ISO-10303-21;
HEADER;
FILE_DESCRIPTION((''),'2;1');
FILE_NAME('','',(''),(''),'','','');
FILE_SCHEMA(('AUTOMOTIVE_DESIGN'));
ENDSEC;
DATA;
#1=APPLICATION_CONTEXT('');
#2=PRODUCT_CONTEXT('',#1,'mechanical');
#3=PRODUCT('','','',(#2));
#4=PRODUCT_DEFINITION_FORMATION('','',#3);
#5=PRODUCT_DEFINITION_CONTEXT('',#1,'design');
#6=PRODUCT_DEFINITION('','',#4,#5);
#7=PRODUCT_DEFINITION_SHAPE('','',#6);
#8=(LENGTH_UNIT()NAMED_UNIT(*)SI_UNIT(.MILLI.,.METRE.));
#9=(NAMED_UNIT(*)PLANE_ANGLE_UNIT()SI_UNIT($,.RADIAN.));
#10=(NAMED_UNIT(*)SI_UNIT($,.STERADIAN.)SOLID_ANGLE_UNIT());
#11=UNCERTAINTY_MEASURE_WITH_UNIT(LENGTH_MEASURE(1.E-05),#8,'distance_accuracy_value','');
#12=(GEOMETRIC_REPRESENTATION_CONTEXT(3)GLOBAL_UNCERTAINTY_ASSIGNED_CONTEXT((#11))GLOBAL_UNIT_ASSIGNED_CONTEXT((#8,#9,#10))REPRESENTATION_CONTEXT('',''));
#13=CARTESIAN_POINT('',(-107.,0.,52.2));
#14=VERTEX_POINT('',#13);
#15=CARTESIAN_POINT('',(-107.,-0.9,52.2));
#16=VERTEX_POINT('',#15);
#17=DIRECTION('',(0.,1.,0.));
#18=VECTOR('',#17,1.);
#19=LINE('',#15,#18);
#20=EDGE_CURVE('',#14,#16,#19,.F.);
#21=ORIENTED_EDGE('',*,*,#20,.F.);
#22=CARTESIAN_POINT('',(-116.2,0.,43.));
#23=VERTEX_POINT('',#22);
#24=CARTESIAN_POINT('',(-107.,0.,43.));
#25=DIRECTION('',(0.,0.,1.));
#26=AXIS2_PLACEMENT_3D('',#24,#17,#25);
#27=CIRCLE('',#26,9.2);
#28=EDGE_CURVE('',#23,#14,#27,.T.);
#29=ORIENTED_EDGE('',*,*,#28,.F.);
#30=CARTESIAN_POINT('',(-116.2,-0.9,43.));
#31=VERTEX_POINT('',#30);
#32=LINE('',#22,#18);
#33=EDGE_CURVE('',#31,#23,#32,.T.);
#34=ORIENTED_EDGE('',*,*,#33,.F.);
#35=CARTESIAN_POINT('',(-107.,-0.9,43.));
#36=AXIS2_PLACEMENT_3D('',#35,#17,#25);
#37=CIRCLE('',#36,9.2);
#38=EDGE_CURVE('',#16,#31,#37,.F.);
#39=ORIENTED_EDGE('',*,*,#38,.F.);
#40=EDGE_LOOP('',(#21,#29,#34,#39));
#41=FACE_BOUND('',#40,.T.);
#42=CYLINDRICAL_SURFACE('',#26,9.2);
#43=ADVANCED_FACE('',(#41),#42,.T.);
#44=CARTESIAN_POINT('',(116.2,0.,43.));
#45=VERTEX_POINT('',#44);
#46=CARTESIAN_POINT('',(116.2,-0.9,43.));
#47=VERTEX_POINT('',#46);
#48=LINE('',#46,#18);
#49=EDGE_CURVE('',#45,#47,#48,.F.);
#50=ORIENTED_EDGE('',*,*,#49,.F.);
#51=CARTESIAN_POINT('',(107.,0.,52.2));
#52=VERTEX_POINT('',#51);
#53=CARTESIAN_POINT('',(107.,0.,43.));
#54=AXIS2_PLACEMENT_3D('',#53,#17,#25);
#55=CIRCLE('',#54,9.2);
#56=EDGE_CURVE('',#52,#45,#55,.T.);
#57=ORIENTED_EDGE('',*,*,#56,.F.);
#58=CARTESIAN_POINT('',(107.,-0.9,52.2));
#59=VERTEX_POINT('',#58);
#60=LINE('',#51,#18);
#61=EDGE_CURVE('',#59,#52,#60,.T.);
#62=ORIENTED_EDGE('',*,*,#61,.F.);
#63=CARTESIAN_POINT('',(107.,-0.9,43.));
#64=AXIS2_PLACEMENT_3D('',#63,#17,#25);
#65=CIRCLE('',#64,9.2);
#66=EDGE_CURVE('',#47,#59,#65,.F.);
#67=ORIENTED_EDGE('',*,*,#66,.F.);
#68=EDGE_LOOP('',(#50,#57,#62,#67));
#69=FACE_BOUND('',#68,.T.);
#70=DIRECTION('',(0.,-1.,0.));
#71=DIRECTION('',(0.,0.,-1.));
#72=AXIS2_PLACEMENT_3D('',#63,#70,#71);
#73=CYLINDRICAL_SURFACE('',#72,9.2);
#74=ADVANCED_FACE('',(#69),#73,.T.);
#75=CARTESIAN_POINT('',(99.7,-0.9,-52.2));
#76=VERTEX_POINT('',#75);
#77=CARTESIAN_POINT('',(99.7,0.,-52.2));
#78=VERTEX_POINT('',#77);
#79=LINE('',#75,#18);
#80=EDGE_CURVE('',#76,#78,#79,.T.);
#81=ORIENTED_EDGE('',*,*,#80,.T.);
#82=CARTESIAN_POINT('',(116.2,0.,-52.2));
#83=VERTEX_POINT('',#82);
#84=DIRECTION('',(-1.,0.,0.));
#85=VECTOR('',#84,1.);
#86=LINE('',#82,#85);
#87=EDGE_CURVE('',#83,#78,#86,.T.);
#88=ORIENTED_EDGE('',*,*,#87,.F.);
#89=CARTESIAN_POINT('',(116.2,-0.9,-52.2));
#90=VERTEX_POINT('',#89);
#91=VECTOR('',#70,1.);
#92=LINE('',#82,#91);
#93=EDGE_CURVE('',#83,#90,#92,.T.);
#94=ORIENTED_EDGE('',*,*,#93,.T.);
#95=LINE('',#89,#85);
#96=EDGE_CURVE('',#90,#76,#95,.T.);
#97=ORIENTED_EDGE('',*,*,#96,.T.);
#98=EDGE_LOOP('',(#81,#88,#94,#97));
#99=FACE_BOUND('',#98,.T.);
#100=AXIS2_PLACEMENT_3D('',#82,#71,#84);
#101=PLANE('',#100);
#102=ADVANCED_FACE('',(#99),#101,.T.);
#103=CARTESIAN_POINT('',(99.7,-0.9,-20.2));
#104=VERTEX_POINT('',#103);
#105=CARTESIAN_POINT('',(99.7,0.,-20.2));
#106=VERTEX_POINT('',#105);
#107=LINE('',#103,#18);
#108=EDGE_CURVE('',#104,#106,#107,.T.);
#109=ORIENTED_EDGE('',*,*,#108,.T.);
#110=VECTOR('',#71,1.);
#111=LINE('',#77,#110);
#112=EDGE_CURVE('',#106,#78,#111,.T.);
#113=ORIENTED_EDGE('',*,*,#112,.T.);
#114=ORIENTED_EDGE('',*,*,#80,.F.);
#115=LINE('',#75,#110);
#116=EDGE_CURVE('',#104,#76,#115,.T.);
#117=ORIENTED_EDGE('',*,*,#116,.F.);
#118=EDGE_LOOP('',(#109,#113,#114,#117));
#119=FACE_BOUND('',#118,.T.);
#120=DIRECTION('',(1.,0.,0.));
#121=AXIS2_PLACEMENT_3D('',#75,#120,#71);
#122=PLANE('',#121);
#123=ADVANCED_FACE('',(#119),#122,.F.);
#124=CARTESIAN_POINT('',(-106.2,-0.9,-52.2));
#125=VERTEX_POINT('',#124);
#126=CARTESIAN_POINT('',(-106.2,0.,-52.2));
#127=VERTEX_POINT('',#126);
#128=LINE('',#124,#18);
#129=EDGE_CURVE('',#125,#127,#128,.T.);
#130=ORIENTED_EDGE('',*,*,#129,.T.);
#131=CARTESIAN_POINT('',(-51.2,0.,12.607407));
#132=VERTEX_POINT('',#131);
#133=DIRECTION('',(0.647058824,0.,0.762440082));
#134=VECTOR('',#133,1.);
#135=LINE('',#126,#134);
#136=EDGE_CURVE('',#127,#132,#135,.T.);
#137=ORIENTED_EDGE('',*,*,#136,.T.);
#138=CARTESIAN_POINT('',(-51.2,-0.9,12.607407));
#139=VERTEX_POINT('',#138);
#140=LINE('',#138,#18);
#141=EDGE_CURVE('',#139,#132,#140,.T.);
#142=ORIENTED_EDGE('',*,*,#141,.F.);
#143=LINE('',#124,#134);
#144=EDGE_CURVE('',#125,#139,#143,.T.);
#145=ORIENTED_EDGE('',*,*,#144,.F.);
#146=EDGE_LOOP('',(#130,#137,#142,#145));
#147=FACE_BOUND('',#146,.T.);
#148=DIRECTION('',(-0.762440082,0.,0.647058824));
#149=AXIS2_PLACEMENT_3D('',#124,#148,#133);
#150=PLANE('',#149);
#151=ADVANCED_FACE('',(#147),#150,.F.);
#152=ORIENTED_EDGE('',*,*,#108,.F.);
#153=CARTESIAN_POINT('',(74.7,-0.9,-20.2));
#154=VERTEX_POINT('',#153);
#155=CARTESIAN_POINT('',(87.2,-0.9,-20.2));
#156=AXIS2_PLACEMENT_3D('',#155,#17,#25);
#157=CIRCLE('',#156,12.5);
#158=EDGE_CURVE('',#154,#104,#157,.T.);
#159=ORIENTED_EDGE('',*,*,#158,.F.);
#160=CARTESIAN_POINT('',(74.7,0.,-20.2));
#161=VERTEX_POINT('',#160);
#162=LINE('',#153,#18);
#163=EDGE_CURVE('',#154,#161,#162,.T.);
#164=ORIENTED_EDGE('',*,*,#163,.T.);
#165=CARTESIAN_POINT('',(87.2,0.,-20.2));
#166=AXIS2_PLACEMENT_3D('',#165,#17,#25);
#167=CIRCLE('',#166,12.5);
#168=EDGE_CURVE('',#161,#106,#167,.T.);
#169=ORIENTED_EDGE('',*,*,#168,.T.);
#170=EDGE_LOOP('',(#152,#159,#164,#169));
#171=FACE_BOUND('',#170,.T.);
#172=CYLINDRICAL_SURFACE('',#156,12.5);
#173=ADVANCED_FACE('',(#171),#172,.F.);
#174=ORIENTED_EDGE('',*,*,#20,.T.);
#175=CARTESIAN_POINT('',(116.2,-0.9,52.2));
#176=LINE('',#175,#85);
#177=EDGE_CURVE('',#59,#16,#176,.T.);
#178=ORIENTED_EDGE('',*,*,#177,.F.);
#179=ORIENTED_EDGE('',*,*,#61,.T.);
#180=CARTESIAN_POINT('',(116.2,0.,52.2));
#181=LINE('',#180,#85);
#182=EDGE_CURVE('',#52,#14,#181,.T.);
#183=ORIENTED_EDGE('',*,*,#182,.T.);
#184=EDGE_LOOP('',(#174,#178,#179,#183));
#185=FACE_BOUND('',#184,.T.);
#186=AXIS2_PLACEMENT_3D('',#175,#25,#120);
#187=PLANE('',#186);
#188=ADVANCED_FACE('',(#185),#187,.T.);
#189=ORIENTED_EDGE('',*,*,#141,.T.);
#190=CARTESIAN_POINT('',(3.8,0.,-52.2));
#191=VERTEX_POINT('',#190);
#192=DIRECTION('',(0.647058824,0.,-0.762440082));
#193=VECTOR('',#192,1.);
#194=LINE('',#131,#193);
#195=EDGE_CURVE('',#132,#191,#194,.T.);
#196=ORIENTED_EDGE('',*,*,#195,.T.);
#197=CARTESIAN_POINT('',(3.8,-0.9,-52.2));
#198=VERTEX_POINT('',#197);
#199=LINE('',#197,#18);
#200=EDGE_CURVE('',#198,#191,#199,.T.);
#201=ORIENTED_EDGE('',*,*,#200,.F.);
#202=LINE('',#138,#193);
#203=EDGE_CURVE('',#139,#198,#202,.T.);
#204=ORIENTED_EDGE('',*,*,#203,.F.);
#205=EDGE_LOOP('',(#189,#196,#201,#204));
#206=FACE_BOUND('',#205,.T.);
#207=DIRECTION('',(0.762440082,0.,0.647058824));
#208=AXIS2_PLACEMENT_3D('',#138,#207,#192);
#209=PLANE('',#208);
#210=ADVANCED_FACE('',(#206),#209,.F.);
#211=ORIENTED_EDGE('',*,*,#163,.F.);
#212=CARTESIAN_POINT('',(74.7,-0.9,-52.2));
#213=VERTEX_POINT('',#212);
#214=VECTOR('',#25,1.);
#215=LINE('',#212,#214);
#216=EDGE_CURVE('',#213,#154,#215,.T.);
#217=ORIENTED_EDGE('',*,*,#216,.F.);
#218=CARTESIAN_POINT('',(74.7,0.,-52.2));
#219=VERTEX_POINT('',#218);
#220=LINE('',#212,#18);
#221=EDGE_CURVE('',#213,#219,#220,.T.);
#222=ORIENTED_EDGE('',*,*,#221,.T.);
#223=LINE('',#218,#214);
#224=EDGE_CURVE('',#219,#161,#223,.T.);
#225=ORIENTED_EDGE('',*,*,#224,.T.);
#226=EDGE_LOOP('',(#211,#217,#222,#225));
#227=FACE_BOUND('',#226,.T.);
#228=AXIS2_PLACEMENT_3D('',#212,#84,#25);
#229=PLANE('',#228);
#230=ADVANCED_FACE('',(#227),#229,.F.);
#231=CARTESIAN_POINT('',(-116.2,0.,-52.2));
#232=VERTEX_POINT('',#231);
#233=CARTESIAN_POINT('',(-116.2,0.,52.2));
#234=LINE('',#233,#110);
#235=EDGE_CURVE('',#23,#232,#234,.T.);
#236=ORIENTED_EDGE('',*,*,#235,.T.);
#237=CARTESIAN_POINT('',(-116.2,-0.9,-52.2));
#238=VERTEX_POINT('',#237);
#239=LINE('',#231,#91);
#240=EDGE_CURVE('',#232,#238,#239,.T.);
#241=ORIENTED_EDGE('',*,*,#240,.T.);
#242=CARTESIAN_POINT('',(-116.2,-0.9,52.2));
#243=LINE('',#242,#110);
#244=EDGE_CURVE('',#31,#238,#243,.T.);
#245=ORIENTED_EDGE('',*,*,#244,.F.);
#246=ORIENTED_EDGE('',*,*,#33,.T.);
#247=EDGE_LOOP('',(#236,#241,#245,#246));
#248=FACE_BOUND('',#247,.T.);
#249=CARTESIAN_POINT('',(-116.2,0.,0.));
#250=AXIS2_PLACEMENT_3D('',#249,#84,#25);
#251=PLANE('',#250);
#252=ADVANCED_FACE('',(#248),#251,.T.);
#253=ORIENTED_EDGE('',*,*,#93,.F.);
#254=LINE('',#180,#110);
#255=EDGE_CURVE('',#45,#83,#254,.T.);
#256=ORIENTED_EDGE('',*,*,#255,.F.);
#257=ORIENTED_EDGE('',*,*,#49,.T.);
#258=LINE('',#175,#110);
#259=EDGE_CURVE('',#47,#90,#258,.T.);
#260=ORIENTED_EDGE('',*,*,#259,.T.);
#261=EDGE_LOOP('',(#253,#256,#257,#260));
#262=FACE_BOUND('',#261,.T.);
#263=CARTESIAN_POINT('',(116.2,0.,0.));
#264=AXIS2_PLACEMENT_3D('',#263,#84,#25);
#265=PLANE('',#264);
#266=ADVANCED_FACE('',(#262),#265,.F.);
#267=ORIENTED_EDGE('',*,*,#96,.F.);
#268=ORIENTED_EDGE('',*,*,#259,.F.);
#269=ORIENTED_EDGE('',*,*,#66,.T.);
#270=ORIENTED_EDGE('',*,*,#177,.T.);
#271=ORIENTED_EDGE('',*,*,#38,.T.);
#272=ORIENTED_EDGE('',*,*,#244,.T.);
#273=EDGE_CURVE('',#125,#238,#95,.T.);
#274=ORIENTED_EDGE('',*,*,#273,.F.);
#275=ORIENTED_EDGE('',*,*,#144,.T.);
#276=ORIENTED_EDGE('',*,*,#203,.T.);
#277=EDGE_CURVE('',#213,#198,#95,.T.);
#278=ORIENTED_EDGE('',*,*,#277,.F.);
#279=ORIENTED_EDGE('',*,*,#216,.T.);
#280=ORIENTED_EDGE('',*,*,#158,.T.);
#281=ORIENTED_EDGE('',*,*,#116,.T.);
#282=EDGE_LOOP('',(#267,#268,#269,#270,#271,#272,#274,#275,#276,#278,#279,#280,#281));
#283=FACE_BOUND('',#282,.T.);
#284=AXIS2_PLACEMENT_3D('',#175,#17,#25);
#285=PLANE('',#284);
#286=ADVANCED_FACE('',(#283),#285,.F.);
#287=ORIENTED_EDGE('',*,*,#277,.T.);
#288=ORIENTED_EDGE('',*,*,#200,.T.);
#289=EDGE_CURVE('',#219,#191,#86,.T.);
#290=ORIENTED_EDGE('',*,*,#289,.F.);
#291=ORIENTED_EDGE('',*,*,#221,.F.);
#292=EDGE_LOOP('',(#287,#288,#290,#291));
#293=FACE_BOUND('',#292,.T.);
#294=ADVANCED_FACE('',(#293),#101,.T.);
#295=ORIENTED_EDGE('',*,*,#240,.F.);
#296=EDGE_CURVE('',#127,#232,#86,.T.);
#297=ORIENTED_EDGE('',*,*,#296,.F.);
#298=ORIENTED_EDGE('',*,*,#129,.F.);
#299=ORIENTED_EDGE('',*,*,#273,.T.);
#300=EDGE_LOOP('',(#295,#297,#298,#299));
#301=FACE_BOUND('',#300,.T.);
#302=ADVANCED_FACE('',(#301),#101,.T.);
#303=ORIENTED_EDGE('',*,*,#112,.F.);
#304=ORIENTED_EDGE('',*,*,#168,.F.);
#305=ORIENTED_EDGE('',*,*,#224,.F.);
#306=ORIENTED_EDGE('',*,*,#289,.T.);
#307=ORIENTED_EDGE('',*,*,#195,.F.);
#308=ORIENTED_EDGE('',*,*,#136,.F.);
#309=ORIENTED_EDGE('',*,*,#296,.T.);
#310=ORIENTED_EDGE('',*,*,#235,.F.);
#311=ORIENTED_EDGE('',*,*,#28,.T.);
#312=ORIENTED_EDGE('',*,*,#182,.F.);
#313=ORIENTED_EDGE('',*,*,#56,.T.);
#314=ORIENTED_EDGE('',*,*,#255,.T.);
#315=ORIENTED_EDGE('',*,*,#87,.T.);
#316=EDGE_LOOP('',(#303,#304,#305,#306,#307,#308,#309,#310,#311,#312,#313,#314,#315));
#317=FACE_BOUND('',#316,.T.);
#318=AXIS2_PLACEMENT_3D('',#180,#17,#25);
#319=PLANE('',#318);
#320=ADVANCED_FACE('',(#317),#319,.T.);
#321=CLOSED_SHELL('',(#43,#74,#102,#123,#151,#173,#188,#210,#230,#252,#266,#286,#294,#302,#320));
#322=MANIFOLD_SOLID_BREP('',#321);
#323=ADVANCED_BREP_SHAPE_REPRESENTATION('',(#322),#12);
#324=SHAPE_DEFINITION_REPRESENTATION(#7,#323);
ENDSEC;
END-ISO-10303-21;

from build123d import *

# Parameters (mm, degrees)
SKETCH1_W          = 104.4
SKETCH1_H          = 0.9
BASE_FLANGE1_DEPTH = 116.2
FILLET1_R          = 9.2
CUT_EXTRUDE1_DEPTH = 128.389520762
CUT_EXTRUDE2_DEPTH = 128.389520762


# Sheet-metal steps are written as plain solids
with BuildPart() as part:
    # Sketch1 → Base-Flange1 (new, symmetric)
    with BuildSketch(Plane(origin=(0, 0, 0), x_dir=(0, 0, -1), z_dir=(1, 0, 0))):
        with Locations((0, -0.45)):
            Rectangle(SKETCH1_W, SKETCH1_H)
    extrude(amount=BASE_FLANGE1_DEPTH, both=True)

    # Fillet1
    fillet1_edges = [part.edges().sort_by_distance(p)[0] for p in [
        (116.2, -0.45, 52.2),
        (-116.2, -0.45, 52.2),
    ]]
    fillet(fillet1_edges, radius=FILLET1_R)

    # Sketch2 → Cut-Extrude1 (cut, through all)
    with BuildSketch(Plane(origin=(0, 0, 0), x_dir=(1, 0, 0), z_dir=(0, 1, 0))):
        with BuildLine():
            Line((74.7, 52.2), (99.7, 52.2))
            Line((99.7, 52.2), (99.7, 20.2))
            ThreePointArc((99.7, 20.2), (87.2, 7.7), (74.7, 20.2))
            Line((74.7, 20.2), (74.7, 52.2))
        make_face()
    extrude(amount=-CUT_EXTRUDE1_DEPTH, mode=Mode.SUBTRACT)

    # Sketch3 → Cut-Extrude2 (cut, through all)
    with BuildSketch(Plane(origin=(0, 0, 0), x_dir=(1, 0, 0), z_dir=(0, 1, 0))):
        Polygon((-106.2, 52.2), (-51.2, -12.607406984), (3.8, 52.2), align=None)
    extrude(amount=-CUT_EXTRUDE2_DEPTH, mode=Mode.SUBTRACT)


solid = part.part
